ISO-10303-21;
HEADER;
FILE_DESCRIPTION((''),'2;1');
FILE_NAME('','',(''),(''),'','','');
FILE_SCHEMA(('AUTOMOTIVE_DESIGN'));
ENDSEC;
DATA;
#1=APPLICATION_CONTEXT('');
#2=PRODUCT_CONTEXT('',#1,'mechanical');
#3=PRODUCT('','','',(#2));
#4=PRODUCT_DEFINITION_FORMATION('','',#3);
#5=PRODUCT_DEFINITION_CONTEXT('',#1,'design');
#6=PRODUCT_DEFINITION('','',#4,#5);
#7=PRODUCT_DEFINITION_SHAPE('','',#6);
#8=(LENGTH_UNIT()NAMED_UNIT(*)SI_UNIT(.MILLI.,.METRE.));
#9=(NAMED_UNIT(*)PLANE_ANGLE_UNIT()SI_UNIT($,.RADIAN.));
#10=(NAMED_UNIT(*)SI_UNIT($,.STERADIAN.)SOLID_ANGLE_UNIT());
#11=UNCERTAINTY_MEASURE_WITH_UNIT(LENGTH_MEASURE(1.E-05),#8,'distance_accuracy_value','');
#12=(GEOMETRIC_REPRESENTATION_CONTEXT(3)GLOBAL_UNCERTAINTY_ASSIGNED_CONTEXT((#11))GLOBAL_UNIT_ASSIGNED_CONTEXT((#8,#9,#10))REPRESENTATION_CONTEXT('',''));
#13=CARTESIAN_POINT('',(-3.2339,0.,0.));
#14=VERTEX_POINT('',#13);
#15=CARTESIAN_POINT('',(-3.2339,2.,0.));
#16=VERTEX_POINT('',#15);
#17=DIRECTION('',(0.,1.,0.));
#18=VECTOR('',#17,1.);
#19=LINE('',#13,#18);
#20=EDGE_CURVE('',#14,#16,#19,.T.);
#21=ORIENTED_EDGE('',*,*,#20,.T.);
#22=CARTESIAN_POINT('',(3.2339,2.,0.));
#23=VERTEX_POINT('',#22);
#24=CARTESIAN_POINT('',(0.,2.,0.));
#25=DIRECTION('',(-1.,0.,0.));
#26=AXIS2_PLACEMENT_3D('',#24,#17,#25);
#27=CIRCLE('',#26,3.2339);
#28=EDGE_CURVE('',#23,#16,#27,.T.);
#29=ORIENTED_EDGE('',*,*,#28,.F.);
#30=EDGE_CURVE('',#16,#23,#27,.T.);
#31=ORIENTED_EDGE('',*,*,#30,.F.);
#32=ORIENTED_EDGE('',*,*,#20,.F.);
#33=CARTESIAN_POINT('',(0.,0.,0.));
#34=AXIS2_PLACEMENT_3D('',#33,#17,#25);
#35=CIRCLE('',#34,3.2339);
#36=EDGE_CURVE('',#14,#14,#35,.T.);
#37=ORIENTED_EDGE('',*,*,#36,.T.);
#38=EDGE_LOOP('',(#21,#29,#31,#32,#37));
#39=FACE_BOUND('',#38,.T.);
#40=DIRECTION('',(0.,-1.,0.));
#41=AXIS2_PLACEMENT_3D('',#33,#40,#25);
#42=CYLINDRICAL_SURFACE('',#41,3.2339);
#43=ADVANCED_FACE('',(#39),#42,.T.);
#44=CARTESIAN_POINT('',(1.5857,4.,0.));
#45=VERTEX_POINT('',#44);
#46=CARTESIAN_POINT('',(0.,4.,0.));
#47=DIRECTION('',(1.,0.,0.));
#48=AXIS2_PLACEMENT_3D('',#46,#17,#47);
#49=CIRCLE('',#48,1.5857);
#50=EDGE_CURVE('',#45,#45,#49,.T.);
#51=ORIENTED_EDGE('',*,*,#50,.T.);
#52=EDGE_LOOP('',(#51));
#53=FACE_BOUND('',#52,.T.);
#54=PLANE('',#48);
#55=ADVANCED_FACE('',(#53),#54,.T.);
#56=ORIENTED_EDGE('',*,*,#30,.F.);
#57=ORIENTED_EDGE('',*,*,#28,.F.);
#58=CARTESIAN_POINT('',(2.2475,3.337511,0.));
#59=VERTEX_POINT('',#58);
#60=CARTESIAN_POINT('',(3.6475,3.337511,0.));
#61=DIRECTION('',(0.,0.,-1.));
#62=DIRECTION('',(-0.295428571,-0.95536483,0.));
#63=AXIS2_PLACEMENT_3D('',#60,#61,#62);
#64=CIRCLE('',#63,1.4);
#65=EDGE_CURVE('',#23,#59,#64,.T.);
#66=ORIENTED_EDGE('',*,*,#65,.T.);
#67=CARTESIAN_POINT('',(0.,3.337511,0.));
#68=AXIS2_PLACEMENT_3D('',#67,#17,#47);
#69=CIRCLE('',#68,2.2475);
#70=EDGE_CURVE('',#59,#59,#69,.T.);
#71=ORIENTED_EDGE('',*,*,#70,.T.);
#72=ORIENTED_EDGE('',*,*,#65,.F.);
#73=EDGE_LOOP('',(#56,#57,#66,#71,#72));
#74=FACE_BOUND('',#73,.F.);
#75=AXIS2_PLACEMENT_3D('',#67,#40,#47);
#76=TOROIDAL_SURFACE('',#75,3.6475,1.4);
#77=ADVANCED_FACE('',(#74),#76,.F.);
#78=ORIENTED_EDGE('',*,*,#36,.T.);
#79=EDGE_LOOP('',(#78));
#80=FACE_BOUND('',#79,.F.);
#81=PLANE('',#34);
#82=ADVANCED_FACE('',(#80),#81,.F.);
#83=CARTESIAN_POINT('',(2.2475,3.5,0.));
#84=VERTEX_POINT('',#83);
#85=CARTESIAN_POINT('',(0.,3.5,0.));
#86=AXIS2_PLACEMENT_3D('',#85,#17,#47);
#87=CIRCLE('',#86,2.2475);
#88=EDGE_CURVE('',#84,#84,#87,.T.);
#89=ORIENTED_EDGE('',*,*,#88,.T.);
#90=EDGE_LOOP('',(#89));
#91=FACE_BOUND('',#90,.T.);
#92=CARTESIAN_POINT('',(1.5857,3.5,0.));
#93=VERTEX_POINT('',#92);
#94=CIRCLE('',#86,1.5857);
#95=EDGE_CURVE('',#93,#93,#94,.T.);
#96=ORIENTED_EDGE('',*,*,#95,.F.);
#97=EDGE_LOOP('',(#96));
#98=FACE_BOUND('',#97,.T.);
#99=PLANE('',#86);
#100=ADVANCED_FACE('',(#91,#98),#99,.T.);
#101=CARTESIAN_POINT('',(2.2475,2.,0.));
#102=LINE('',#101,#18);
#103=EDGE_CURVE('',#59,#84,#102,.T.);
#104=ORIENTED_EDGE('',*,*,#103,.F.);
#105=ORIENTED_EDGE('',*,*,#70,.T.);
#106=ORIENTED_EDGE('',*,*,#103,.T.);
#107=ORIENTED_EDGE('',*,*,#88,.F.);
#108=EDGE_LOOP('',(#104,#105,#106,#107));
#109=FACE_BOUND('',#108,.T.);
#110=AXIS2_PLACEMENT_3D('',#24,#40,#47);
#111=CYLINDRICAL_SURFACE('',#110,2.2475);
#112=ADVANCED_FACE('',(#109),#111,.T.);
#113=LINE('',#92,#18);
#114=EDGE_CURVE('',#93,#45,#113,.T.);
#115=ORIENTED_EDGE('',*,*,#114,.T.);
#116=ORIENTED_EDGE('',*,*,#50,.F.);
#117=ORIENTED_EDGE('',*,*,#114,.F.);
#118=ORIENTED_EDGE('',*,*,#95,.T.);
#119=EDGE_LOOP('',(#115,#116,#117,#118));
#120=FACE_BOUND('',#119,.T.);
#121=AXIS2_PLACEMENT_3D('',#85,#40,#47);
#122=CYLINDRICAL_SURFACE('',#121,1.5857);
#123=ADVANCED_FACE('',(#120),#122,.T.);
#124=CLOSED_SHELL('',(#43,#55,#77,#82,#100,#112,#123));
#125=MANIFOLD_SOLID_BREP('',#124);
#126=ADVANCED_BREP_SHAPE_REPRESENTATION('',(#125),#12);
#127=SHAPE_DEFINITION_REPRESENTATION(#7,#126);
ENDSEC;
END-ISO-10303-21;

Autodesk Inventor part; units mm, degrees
ref_plane "YZ Plane" through (0, 0, 0) normal (1, 0, 0) x (0, 1, 0)
ref_plane "XZ Plane" through (0, 0, 0) normal (0, 1, 0) x (-1, 0, 0)
ref_plane "XY Plane" through (0, 0, 0) normal (0, 0, 1) x (1, 0, 0)
sketch "Sketch1" plane through (0, 0, 0) normal (0, 1, 0) x (-1, 0, 0)
  circle A0 centre (0, 0) radius 3.2339
extrude "Extrusion1" add sketch "Sketch1" along normal blind 2
sketch "Sketch2" plane through (0, 2, 0) normal (0, 1, 0) x (1, 0, 0)
  circle A0 centre (0, 0) radius 2.2475
extrude "Extrusion2" add sketch "Sketch2" along normal blind 1.5
fillet "Fillet1" radius 1.4 1 edges at (-2.2475, 2, 0)
sketch "Sketch3" plane through (0, 3.5, 0) normal (0, 1, 0) x (1, 0, 0)
  circle A0 centre (0, 0) radius 1.5857
extrude "Extrusion3" add sketch "Sketch3" along normal blind 0.5
sketch "Sketch4" plane through (0, 4, 0) normal (0, 1, 0) x (1, 0, 0)
  point P0 (0, 0)
properties part number "SWITCH"
